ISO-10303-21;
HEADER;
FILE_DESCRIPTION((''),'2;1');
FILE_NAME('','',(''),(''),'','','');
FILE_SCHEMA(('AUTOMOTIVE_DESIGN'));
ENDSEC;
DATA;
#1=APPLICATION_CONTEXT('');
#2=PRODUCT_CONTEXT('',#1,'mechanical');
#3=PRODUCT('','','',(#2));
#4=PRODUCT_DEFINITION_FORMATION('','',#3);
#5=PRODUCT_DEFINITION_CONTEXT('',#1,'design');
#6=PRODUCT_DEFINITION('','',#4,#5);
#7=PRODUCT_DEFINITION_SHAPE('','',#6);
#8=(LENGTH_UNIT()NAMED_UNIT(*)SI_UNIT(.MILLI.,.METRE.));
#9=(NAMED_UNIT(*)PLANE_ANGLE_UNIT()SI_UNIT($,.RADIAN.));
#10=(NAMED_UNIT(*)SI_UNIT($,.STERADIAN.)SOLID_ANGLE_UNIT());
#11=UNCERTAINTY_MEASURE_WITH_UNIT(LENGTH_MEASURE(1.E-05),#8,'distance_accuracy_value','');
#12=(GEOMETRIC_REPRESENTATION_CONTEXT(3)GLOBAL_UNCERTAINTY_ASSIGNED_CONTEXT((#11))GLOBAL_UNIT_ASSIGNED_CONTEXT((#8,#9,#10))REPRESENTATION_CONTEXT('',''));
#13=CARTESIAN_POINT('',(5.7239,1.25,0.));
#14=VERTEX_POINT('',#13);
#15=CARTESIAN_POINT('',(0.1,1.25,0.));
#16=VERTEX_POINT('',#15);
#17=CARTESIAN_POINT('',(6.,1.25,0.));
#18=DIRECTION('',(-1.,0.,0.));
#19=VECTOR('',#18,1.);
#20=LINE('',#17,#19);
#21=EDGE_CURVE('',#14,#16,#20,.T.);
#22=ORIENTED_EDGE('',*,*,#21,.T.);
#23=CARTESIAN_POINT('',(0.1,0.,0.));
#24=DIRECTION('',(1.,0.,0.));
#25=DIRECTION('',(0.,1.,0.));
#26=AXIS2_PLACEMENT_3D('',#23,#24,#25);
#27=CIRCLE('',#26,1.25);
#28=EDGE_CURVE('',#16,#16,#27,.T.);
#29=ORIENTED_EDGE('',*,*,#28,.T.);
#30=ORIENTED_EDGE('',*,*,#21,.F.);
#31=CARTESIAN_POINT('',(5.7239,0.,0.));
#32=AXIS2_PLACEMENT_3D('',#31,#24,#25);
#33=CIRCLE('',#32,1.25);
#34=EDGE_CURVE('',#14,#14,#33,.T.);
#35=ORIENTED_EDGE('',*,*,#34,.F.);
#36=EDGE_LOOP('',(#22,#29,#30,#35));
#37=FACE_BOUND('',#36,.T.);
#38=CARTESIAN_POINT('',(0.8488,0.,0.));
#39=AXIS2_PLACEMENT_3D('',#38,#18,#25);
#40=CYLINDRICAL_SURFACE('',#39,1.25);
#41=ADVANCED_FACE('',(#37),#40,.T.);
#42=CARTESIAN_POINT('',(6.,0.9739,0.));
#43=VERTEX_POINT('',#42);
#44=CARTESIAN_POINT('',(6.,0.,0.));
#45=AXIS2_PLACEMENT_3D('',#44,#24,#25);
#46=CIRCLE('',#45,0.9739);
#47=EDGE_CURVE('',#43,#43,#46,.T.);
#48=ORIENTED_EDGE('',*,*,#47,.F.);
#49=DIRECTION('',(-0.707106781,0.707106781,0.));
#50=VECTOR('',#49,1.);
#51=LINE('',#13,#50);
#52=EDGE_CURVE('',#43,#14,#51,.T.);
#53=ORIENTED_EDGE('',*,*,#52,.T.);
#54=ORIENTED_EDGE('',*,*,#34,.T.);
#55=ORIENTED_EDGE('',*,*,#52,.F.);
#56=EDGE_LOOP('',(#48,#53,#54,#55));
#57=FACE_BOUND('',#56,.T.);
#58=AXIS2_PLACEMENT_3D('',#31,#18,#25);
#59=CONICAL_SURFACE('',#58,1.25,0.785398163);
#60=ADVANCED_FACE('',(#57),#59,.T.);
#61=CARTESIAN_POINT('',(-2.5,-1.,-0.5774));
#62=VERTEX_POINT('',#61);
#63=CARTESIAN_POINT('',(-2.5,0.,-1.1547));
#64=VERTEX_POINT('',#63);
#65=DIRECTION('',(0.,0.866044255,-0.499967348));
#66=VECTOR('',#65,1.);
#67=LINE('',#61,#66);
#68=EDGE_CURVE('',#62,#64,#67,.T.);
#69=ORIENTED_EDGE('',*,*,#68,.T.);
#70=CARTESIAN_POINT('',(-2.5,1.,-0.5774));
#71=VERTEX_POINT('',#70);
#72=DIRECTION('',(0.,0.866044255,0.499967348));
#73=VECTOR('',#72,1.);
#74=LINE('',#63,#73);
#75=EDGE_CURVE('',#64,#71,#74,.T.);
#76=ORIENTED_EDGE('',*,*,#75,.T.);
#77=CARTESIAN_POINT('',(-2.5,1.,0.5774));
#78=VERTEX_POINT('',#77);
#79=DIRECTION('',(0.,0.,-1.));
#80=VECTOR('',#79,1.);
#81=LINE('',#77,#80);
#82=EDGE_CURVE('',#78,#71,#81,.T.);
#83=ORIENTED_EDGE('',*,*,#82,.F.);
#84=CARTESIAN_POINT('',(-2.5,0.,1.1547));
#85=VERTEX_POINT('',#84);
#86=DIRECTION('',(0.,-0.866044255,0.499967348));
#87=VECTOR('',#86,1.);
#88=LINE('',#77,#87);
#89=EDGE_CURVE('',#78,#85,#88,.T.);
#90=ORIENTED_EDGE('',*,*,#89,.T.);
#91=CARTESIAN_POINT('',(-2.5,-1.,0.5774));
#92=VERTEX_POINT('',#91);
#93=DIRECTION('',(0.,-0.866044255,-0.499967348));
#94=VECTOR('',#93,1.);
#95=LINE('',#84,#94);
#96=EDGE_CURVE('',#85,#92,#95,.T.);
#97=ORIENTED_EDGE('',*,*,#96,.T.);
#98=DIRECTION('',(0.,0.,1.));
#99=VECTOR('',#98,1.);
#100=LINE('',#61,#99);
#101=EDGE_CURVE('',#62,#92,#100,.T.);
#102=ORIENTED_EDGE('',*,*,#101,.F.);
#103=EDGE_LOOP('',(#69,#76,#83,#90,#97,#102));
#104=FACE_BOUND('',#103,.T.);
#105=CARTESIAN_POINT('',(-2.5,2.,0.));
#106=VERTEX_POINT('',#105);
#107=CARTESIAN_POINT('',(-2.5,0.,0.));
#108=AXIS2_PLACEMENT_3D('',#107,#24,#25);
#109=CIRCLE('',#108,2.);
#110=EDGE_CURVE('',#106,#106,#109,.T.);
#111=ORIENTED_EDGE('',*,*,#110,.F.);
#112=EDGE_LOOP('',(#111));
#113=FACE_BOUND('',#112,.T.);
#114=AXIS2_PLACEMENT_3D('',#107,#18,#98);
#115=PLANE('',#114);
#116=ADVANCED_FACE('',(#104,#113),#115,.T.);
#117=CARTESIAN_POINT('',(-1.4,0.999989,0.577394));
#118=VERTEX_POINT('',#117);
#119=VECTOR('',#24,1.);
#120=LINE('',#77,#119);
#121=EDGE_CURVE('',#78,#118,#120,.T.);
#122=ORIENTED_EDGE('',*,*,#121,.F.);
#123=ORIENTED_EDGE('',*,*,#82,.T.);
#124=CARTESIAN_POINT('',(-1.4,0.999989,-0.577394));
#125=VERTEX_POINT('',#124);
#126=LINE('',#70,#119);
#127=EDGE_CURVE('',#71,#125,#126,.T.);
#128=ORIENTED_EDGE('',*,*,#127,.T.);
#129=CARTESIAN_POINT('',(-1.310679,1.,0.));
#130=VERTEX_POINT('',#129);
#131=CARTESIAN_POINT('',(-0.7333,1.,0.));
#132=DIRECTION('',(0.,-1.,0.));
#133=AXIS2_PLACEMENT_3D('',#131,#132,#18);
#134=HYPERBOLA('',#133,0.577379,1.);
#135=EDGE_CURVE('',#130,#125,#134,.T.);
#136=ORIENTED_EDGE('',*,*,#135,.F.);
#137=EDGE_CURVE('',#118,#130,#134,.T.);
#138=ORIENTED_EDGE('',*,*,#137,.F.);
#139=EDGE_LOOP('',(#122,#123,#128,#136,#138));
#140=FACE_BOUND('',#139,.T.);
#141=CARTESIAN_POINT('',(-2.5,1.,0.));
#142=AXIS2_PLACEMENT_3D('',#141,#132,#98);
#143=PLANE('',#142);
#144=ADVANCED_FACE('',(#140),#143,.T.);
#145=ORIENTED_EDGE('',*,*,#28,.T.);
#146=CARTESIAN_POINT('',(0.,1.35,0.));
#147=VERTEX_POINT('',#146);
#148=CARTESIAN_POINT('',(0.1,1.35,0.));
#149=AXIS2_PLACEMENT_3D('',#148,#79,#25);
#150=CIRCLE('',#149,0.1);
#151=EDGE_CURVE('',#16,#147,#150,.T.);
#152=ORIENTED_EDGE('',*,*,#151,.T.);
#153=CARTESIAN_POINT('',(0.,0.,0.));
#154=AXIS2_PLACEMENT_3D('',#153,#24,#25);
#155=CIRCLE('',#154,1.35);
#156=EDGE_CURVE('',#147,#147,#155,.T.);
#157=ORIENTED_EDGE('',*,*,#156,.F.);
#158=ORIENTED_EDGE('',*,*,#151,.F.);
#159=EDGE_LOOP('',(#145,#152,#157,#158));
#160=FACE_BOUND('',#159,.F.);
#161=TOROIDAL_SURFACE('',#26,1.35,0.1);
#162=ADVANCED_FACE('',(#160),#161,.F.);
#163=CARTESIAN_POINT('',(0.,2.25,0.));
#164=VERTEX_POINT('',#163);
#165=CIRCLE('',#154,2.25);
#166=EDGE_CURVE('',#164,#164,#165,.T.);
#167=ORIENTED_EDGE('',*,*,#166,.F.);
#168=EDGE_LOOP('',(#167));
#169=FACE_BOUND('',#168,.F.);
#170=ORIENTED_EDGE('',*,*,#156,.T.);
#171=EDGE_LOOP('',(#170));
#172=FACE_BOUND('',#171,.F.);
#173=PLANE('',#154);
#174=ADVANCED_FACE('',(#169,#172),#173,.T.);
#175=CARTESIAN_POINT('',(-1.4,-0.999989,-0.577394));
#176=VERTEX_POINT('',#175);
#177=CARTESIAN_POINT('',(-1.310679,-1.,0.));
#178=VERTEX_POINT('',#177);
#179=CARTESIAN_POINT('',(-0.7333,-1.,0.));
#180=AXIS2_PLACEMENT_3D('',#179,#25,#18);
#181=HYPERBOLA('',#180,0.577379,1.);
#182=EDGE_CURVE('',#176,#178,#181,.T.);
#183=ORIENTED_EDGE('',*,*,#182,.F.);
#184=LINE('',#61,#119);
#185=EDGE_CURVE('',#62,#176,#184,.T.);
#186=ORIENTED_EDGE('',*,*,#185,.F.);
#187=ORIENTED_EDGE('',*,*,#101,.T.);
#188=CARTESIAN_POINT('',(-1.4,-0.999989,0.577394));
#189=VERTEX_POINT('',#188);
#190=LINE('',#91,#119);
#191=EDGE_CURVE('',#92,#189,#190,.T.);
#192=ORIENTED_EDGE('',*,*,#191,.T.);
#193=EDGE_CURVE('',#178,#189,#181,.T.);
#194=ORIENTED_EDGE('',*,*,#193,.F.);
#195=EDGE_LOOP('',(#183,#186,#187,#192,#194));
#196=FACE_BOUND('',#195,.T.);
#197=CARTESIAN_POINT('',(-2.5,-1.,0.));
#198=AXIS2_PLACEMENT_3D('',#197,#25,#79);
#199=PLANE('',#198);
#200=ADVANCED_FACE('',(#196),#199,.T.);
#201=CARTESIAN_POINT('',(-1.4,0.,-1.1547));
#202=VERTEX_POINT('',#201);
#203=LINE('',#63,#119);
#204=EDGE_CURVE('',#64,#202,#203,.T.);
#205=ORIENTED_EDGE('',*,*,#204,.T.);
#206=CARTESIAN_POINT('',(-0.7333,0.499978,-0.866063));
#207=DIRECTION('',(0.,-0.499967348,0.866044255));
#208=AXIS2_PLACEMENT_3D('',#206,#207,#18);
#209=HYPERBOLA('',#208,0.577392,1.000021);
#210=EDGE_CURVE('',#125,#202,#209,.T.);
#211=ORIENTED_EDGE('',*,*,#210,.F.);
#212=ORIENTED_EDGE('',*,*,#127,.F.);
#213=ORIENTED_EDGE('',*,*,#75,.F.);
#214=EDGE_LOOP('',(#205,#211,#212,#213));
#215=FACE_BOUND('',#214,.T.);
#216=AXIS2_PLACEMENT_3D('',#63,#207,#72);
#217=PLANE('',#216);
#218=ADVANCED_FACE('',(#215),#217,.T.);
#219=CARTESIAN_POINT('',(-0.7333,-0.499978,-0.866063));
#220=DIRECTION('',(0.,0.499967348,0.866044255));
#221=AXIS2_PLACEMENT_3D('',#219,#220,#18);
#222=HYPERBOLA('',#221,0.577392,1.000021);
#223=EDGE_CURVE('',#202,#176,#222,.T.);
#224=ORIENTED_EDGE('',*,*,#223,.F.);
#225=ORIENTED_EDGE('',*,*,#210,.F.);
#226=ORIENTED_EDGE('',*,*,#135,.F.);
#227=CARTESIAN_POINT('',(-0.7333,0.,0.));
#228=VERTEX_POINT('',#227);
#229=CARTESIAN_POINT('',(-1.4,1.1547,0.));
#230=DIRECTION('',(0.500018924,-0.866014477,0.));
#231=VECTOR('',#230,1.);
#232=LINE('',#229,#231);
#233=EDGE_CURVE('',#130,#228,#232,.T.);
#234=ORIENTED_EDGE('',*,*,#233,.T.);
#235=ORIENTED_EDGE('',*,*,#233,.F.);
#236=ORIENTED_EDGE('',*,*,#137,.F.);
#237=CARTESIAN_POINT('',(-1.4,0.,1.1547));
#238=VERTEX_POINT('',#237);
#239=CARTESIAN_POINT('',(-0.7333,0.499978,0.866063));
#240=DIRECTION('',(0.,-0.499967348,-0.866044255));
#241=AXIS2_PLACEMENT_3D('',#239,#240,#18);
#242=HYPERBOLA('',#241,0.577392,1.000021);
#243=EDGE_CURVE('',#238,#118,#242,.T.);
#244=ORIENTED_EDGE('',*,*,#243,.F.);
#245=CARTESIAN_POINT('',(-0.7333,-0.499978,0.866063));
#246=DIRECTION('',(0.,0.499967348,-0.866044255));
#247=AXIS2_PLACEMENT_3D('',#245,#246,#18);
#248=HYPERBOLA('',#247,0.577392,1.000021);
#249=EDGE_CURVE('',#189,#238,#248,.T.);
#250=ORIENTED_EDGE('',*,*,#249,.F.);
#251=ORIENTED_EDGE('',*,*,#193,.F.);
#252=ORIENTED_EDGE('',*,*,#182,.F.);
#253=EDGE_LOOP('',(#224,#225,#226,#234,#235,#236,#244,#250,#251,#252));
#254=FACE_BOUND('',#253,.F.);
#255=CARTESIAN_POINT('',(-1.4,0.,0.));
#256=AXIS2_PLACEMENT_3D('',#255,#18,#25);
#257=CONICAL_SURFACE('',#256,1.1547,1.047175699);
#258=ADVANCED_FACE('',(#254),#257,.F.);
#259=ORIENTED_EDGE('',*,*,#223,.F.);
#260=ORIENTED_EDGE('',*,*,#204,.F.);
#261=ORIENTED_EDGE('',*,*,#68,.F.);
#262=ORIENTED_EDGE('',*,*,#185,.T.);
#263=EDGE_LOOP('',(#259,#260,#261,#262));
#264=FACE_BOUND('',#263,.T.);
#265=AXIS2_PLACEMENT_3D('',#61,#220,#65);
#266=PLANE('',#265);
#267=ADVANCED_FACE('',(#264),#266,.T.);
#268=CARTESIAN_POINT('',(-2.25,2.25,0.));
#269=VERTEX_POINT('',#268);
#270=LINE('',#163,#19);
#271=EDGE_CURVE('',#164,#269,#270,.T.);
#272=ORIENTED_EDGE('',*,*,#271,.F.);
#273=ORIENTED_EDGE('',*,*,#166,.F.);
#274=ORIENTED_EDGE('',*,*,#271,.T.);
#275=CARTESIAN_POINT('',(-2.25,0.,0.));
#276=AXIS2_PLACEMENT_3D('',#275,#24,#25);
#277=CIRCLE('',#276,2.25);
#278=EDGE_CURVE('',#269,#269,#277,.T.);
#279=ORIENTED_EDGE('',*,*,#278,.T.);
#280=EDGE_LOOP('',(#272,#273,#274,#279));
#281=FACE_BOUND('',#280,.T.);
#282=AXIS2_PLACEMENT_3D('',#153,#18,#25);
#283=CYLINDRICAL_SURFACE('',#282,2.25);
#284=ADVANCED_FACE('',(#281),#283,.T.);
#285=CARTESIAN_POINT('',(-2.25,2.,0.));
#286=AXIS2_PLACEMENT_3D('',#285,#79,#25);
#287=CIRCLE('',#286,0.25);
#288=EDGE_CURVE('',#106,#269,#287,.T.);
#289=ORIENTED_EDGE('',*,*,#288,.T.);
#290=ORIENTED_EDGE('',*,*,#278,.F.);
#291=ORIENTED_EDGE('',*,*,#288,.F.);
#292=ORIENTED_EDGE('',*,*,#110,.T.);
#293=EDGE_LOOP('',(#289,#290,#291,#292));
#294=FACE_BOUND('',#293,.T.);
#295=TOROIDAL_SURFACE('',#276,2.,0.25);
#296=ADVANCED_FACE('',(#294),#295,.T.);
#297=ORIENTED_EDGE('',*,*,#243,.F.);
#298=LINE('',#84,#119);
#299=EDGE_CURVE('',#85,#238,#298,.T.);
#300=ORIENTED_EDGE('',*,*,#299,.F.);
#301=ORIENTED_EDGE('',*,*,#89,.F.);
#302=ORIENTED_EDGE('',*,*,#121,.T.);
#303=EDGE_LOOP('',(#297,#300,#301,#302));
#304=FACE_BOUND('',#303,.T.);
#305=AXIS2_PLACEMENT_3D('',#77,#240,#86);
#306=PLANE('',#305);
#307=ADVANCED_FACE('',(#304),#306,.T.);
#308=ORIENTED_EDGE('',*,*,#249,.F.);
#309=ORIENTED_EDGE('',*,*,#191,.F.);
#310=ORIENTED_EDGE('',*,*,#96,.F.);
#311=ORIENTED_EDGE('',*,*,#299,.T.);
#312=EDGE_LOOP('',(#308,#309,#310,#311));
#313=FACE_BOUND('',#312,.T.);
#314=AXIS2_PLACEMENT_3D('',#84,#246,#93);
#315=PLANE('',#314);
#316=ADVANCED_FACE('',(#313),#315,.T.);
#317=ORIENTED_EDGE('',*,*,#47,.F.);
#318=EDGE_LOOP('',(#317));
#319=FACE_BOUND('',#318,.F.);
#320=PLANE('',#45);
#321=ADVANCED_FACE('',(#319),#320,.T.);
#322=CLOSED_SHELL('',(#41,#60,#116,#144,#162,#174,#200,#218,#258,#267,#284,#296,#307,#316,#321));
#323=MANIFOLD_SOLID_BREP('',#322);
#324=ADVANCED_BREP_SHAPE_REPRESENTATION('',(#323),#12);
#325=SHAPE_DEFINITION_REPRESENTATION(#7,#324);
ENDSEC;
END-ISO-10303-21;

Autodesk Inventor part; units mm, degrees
ref_plane "YZ Plane" through (0, 0, 0) normal (1, 0, 0) x (0, 1, 0)
ref_plane "XZ Plane" through (0, 0, 0) normal (0, 1, 0) x (-1, 0, 0)
sketch "Sketch1" plane through (0, 0, 0) normal (0, 0, 1) x (1, 0, 0)
  line L0 (-0.7333, 0) -> (6, 0)
  line L1 (6, 0) -> (6, 1.25)
  line L2 (6, 1.25) -> (1.125, 1.25)
  line L3 (1.125, 1.25) -> (0.8488, 1.25)
  line L4 (0.8488, 1.25) -> (0, 1.25)
  line L5 (0, 1.25) -> (0, 2.25)
  line L6 (0, 2.25) -> (-2.5, 2.25)
  line L7 (-2.5, 2.25) -> (-2.5, 1.1547)
  line L8 (-2.5, 1.1547) -> (-1.4, 1.1547)
  line L9 (-1.4, 1.1547) -> (-0.7333, 0)
  line L10 (-4.2, 0) -> (7.7, 0) projected
  line L11 (0, -0.45) -> (0, 2.7) projected
  line L12 (1.125, 1.25) -> (0, 1.25) construction
  dimension "d1" = 4.875
  dimension "d2" = 0.2762
  dimension "d3" = 2.5
  dimension "d4" = 1.1
  dimension "d5" = 60
  dimension "d6" = 2.5
  dimension "d7" = 2.5
  dimension "d8" = 2.3094
  dimension "d9" = 4.5
  dimension "d26" = 6
revolve "Body" add sketch "Sketch1" angle 360 about axis through (-0.7333, 0, 0) along (1, 0, 0)
sketch "Sketch2" plane through (-2.5, 0, 0) normal (-1, 0, 0) x (0, 0, 1)
  circle A0 centre (0, 0) radius 1.1547 projected
  line L0 (0, -3.15) -> (0, 3.15) projected
  line L1 (-3.15, 0) -> (3.15, 0) projected
  line L2 (1.1547, 0) -> (0.5774, -1)
  line L3 (0.5774, -1) -> (-0.5774, -1)
  line L4 (-0.5774, -1) -> (-1.1547, 0)
  line L5 (-1.1547, 0) -> (-0.5774, 1)
  line L6 (-0.5774, 1) -> (0.5774, 1)
  line L7 (0.5774, 1) -> (1.1547, 0)
extrude "Slot" add sketch "Sketch2" against normal up to next contours L7 A0 | A0 L2 | L6 L0 A0 | A0 L0 L3 | L0 L6 A0 | A0 L3 L0 | L4 A0 | A0 L5
fillet "Fillet1" radius 0.25 1 edges at (-2.5, -2.25, 0)
thread "Thread" size "M2.5x0.45" class "6g" standard "ISO Metric profile" length 4.875
chamfer "Chamfer1" distance 0.2761 distance2 0.2761 1 edges at (6, -1.25, 0) measured on face at (6, -0.1825, -0.5629)
ref_plane "Work Plane1" through (29, 0, 0) normal (0, -1, 0) x (1, 0, 0)
fillet "Fillet2" radius 0.1 1 edges at (0, -1.25, 0)
equation "\"d30\" = R"
equation "\"d17\" = RR"
equation "\"d13\" = GEL"
equation "\"d15\" = -0.5 * SPD + 0.5 * GD"
equation "\"d16\" = GUL"
equation "\"d1\" = GEL"
equation "\"d3\" = KOH"
equation "\"d4\" = INTI"
equation "\"d6\" = GD"
equation "\"d7\" = BDM"
equation "\"d8\" = 1.1547 * SW"
equation "\"d9\" = KOD"
equation "\"d26\" = NLG"
equation "\"GD\" = 2.5"
equation "\"NLG\" = 6"
equation "\"GEL\" = 4.875"
equation "\"KOD\" = 4.5"
equation "\"KOH\" = 2.5"
equation "\"INTI\" = 1.1"
equation "\"GAL\" = 0.61345 * PTC"
equation "\"GUL\" = 0.61345 * PTC"
equation "\"BDM\" = NND"
equation "\"SW\" = 2"
equation "\"RR\" = 0.25"
equation "\"SPD\" = NND - 1.2269 * PTC"
equation "\"R\" = 0.1"
equation "\"TOA\" = 30deg"
equation "\"GD1\" = THREADDIA - 1.2269 * PTC"
equation "\"THREADDIA\" = 2.5"
equation "\"FAWI\" = 45deg"
equation "\"PTC\" = 0.45"
equation "\"NND\" = 2.5"
equation "\"E0\" = 1.155 * SW"
properties part number "ISO 4762 - M2.5 x 6" material "Stainless Steel, 440C"
